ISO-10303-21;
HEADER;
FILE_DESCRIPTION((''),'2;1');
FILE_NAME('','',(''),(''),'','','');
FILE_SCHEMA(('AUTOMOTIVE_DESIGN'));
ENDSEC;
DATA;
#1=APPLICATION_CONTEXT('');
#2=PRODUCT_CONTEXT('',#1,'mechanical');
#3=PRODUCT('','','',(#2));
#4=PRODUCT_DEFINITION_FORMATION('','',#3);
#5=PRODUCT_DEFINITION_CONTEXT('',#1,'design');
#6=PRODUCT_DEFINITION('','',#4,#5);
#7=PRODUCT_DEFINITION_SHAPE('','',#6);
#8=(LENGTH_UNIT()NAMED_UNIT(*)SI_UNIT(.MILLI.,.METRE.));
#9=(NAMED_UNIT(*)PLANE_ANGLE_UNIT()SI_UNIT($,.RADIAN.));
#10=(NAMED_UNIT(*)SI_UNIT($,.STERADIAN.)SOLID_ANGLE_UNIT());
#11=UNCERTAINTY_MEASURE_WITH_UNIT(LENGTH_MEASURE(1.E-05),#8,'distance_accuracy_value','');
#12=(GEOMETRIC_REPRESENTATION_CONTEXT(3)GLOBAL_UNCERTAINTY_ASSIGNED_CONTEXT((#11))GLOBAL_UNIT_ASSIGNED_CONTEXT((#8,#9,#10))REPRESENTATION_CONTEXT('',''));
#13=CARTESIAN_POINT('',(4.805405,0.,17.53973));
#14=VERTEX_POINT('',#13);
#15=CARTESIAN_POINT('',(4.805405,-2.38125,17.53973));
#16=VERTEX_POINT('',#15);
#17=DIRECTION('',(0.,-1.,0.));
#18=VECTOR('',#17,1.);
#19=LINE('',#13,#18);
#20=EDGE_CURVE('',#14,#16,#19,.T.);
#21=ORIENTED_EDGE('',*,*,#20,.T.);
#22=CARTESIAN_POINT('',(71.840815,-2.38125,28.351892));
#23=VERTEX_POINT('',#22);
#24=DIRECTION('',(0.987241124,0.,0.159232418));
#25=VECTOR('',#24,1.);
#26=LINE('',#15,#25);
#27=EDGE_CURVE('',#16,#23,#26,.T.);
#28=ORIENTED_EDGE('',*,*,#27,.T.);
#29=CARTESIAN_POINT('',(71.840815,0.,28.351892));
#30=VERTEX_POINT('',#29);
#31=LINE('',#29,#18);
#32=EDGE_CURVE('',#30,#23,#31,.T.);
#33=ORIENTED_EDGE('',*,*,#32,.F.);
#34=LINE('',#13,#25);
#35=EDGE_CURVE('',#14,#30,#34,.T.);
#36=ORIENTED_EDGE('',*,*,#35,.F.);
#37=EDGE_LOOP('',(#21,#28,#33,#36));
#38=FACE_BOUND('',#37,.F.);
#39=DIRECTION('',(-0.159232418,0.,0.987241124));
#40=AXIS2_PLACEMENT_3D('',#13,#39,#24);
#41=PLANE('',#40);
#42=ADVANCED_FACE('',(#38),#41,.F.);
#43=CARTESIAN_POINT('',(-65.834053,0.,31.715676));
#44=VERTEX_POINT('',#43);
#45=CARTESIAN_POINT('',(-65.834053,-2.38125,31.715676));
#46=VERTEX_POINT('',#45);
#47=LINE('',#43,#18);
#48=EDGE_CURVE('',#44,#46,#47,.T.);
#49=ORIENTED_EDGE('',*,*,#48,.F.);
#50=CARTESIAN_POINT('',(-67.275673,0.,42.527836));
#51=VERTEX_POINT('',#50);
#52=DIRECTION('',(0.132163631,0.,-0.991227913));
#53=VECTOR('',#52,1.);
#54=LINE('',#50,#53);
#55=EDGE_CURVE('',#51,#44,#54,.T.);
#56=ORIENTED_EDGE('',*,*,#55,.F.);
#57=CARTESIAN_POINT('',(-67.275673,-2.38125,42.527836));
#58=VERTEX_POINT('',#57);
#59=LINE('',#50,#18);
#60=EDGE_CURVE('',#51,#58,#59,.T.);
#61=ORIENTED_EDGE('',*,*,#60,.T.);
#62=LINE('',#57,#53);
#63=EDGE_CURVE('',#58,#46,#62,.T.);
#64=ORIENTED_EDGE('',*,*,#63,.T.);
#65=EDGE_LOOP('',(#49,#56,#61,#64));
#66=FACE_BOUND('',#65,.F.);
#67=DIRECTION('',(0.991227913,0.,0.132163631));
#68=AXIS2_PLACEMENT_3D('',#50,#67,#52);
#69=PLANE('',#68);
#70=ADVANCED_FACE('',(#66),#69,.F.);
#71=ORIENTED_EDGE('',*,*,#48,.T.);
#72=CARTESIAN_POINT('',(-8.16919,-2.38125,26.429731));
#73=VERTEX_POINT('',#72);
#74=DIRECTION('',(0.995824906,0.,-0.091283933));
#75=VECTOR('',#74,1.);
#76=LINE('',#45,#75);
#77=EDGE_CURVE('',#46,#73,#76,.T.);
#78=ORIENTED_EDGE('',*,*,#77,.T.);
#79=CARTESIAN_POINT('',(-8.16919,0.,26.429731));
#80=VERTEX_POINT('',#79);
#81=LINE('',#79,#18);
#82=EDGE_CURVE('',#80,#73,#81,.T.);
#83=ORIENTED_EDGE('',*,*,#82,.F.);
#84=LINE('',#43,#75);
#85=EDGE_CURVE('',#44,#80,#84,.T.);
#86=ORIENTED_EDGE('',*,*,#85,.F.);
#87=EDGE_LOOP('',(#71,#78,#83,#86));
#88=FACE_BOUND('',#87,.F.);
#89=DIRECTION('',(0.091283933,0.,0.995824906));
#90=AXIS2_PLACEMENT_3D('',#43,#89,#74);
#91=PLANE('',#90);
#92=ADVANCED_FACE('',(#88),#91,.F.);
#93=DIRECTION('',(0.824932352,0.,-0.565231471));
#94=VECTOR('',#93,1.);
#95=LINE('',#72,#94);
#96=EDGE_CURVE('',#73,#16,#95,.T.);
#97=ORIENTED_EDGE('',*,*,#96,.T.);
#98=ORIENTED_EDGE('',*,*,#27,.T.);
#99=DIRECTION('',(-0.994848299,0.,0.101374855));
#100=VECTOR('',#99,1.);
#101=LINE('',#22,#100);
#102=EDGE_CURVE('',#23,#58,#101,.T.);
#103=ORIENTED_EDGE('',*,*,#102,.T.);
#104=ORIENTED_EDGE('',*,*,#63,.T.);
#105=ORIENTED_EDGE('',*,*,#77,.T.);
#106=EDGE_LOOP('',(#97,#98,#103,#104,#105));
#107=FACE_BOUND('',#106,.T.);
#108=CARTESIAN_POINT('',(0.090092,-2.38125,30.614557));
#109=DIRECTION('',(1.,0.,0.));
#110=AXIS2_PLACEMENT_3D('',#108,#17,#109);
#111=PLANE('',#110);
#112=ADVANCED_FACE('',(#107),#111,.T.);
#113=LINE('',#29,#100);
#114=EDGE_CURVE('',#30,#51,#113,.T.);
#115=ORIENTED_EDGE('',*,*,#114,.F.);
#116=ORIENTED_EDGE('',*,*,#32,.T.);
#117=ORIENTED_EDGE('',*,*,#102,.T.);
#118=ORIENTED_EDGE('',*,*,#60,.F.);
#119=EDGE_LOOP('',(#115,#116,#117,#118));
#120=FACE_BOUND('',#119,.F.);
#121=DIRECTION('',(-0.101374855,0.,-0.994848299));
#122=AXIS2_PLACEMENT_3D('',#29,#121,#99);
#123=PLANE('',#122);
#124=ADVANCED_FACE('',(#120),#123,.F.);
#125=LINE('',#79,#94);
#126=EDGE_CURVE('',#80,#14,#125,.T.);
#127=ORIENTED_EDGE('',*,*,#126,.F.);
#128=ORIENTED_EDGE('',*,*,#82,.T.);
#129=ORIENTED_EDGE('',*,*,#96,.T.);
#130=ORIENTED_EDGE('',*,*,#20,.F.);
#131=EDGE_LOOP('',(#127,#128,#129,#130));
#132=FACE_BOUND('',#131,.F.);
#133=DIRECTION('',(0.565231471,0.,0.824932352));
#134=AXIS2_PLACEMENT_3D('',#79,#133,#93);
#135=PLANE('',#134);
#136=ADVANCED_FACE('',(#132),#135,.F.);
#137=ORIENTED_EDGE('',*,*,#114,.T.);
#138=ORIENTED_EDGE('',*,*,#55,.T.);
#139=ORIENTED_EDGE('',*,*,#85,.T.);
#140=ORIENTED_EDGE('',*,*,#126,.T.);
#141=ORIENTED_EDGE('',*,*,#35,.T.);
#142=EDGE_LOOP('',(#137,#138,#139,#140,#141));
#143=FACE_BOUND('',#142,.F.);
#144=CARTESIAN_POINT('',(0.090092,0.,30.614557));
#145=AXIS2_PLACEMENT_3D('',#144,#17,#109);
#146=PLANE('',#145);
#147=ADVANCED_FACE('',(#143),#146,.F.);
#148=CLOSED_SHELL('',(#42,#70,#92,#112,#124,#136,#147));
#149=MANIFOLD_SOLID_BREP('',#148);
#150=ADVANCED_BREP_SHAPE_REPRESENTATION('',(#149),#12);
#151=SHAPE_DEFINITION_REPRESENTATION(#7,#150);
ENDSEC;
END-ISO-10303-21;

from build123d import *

# Parameters (mm, degrees)
F1_DEPTH = 2.38125


# Not quite as in the source:
# - a length typed as a fraction of an inch, garbled in the dataset ("3 / 203.2 mm" for 3/8 in), is restored


with BuildPart() as f1:
    # F0 (on Front) → F1 (new body)
    with BuildSketch(Plane.XZ):
        Polygon((71.8408152461, 28.3518917859), (-67.275673151, 42.5278358161), (-65.8340528607, 31.7156761885), (-8.1691900268, 26.4297313988), (4.8054051585, 17.5397302955), align=None)
    extrude(amount=F1_DEPTH)


solid = f1.part
